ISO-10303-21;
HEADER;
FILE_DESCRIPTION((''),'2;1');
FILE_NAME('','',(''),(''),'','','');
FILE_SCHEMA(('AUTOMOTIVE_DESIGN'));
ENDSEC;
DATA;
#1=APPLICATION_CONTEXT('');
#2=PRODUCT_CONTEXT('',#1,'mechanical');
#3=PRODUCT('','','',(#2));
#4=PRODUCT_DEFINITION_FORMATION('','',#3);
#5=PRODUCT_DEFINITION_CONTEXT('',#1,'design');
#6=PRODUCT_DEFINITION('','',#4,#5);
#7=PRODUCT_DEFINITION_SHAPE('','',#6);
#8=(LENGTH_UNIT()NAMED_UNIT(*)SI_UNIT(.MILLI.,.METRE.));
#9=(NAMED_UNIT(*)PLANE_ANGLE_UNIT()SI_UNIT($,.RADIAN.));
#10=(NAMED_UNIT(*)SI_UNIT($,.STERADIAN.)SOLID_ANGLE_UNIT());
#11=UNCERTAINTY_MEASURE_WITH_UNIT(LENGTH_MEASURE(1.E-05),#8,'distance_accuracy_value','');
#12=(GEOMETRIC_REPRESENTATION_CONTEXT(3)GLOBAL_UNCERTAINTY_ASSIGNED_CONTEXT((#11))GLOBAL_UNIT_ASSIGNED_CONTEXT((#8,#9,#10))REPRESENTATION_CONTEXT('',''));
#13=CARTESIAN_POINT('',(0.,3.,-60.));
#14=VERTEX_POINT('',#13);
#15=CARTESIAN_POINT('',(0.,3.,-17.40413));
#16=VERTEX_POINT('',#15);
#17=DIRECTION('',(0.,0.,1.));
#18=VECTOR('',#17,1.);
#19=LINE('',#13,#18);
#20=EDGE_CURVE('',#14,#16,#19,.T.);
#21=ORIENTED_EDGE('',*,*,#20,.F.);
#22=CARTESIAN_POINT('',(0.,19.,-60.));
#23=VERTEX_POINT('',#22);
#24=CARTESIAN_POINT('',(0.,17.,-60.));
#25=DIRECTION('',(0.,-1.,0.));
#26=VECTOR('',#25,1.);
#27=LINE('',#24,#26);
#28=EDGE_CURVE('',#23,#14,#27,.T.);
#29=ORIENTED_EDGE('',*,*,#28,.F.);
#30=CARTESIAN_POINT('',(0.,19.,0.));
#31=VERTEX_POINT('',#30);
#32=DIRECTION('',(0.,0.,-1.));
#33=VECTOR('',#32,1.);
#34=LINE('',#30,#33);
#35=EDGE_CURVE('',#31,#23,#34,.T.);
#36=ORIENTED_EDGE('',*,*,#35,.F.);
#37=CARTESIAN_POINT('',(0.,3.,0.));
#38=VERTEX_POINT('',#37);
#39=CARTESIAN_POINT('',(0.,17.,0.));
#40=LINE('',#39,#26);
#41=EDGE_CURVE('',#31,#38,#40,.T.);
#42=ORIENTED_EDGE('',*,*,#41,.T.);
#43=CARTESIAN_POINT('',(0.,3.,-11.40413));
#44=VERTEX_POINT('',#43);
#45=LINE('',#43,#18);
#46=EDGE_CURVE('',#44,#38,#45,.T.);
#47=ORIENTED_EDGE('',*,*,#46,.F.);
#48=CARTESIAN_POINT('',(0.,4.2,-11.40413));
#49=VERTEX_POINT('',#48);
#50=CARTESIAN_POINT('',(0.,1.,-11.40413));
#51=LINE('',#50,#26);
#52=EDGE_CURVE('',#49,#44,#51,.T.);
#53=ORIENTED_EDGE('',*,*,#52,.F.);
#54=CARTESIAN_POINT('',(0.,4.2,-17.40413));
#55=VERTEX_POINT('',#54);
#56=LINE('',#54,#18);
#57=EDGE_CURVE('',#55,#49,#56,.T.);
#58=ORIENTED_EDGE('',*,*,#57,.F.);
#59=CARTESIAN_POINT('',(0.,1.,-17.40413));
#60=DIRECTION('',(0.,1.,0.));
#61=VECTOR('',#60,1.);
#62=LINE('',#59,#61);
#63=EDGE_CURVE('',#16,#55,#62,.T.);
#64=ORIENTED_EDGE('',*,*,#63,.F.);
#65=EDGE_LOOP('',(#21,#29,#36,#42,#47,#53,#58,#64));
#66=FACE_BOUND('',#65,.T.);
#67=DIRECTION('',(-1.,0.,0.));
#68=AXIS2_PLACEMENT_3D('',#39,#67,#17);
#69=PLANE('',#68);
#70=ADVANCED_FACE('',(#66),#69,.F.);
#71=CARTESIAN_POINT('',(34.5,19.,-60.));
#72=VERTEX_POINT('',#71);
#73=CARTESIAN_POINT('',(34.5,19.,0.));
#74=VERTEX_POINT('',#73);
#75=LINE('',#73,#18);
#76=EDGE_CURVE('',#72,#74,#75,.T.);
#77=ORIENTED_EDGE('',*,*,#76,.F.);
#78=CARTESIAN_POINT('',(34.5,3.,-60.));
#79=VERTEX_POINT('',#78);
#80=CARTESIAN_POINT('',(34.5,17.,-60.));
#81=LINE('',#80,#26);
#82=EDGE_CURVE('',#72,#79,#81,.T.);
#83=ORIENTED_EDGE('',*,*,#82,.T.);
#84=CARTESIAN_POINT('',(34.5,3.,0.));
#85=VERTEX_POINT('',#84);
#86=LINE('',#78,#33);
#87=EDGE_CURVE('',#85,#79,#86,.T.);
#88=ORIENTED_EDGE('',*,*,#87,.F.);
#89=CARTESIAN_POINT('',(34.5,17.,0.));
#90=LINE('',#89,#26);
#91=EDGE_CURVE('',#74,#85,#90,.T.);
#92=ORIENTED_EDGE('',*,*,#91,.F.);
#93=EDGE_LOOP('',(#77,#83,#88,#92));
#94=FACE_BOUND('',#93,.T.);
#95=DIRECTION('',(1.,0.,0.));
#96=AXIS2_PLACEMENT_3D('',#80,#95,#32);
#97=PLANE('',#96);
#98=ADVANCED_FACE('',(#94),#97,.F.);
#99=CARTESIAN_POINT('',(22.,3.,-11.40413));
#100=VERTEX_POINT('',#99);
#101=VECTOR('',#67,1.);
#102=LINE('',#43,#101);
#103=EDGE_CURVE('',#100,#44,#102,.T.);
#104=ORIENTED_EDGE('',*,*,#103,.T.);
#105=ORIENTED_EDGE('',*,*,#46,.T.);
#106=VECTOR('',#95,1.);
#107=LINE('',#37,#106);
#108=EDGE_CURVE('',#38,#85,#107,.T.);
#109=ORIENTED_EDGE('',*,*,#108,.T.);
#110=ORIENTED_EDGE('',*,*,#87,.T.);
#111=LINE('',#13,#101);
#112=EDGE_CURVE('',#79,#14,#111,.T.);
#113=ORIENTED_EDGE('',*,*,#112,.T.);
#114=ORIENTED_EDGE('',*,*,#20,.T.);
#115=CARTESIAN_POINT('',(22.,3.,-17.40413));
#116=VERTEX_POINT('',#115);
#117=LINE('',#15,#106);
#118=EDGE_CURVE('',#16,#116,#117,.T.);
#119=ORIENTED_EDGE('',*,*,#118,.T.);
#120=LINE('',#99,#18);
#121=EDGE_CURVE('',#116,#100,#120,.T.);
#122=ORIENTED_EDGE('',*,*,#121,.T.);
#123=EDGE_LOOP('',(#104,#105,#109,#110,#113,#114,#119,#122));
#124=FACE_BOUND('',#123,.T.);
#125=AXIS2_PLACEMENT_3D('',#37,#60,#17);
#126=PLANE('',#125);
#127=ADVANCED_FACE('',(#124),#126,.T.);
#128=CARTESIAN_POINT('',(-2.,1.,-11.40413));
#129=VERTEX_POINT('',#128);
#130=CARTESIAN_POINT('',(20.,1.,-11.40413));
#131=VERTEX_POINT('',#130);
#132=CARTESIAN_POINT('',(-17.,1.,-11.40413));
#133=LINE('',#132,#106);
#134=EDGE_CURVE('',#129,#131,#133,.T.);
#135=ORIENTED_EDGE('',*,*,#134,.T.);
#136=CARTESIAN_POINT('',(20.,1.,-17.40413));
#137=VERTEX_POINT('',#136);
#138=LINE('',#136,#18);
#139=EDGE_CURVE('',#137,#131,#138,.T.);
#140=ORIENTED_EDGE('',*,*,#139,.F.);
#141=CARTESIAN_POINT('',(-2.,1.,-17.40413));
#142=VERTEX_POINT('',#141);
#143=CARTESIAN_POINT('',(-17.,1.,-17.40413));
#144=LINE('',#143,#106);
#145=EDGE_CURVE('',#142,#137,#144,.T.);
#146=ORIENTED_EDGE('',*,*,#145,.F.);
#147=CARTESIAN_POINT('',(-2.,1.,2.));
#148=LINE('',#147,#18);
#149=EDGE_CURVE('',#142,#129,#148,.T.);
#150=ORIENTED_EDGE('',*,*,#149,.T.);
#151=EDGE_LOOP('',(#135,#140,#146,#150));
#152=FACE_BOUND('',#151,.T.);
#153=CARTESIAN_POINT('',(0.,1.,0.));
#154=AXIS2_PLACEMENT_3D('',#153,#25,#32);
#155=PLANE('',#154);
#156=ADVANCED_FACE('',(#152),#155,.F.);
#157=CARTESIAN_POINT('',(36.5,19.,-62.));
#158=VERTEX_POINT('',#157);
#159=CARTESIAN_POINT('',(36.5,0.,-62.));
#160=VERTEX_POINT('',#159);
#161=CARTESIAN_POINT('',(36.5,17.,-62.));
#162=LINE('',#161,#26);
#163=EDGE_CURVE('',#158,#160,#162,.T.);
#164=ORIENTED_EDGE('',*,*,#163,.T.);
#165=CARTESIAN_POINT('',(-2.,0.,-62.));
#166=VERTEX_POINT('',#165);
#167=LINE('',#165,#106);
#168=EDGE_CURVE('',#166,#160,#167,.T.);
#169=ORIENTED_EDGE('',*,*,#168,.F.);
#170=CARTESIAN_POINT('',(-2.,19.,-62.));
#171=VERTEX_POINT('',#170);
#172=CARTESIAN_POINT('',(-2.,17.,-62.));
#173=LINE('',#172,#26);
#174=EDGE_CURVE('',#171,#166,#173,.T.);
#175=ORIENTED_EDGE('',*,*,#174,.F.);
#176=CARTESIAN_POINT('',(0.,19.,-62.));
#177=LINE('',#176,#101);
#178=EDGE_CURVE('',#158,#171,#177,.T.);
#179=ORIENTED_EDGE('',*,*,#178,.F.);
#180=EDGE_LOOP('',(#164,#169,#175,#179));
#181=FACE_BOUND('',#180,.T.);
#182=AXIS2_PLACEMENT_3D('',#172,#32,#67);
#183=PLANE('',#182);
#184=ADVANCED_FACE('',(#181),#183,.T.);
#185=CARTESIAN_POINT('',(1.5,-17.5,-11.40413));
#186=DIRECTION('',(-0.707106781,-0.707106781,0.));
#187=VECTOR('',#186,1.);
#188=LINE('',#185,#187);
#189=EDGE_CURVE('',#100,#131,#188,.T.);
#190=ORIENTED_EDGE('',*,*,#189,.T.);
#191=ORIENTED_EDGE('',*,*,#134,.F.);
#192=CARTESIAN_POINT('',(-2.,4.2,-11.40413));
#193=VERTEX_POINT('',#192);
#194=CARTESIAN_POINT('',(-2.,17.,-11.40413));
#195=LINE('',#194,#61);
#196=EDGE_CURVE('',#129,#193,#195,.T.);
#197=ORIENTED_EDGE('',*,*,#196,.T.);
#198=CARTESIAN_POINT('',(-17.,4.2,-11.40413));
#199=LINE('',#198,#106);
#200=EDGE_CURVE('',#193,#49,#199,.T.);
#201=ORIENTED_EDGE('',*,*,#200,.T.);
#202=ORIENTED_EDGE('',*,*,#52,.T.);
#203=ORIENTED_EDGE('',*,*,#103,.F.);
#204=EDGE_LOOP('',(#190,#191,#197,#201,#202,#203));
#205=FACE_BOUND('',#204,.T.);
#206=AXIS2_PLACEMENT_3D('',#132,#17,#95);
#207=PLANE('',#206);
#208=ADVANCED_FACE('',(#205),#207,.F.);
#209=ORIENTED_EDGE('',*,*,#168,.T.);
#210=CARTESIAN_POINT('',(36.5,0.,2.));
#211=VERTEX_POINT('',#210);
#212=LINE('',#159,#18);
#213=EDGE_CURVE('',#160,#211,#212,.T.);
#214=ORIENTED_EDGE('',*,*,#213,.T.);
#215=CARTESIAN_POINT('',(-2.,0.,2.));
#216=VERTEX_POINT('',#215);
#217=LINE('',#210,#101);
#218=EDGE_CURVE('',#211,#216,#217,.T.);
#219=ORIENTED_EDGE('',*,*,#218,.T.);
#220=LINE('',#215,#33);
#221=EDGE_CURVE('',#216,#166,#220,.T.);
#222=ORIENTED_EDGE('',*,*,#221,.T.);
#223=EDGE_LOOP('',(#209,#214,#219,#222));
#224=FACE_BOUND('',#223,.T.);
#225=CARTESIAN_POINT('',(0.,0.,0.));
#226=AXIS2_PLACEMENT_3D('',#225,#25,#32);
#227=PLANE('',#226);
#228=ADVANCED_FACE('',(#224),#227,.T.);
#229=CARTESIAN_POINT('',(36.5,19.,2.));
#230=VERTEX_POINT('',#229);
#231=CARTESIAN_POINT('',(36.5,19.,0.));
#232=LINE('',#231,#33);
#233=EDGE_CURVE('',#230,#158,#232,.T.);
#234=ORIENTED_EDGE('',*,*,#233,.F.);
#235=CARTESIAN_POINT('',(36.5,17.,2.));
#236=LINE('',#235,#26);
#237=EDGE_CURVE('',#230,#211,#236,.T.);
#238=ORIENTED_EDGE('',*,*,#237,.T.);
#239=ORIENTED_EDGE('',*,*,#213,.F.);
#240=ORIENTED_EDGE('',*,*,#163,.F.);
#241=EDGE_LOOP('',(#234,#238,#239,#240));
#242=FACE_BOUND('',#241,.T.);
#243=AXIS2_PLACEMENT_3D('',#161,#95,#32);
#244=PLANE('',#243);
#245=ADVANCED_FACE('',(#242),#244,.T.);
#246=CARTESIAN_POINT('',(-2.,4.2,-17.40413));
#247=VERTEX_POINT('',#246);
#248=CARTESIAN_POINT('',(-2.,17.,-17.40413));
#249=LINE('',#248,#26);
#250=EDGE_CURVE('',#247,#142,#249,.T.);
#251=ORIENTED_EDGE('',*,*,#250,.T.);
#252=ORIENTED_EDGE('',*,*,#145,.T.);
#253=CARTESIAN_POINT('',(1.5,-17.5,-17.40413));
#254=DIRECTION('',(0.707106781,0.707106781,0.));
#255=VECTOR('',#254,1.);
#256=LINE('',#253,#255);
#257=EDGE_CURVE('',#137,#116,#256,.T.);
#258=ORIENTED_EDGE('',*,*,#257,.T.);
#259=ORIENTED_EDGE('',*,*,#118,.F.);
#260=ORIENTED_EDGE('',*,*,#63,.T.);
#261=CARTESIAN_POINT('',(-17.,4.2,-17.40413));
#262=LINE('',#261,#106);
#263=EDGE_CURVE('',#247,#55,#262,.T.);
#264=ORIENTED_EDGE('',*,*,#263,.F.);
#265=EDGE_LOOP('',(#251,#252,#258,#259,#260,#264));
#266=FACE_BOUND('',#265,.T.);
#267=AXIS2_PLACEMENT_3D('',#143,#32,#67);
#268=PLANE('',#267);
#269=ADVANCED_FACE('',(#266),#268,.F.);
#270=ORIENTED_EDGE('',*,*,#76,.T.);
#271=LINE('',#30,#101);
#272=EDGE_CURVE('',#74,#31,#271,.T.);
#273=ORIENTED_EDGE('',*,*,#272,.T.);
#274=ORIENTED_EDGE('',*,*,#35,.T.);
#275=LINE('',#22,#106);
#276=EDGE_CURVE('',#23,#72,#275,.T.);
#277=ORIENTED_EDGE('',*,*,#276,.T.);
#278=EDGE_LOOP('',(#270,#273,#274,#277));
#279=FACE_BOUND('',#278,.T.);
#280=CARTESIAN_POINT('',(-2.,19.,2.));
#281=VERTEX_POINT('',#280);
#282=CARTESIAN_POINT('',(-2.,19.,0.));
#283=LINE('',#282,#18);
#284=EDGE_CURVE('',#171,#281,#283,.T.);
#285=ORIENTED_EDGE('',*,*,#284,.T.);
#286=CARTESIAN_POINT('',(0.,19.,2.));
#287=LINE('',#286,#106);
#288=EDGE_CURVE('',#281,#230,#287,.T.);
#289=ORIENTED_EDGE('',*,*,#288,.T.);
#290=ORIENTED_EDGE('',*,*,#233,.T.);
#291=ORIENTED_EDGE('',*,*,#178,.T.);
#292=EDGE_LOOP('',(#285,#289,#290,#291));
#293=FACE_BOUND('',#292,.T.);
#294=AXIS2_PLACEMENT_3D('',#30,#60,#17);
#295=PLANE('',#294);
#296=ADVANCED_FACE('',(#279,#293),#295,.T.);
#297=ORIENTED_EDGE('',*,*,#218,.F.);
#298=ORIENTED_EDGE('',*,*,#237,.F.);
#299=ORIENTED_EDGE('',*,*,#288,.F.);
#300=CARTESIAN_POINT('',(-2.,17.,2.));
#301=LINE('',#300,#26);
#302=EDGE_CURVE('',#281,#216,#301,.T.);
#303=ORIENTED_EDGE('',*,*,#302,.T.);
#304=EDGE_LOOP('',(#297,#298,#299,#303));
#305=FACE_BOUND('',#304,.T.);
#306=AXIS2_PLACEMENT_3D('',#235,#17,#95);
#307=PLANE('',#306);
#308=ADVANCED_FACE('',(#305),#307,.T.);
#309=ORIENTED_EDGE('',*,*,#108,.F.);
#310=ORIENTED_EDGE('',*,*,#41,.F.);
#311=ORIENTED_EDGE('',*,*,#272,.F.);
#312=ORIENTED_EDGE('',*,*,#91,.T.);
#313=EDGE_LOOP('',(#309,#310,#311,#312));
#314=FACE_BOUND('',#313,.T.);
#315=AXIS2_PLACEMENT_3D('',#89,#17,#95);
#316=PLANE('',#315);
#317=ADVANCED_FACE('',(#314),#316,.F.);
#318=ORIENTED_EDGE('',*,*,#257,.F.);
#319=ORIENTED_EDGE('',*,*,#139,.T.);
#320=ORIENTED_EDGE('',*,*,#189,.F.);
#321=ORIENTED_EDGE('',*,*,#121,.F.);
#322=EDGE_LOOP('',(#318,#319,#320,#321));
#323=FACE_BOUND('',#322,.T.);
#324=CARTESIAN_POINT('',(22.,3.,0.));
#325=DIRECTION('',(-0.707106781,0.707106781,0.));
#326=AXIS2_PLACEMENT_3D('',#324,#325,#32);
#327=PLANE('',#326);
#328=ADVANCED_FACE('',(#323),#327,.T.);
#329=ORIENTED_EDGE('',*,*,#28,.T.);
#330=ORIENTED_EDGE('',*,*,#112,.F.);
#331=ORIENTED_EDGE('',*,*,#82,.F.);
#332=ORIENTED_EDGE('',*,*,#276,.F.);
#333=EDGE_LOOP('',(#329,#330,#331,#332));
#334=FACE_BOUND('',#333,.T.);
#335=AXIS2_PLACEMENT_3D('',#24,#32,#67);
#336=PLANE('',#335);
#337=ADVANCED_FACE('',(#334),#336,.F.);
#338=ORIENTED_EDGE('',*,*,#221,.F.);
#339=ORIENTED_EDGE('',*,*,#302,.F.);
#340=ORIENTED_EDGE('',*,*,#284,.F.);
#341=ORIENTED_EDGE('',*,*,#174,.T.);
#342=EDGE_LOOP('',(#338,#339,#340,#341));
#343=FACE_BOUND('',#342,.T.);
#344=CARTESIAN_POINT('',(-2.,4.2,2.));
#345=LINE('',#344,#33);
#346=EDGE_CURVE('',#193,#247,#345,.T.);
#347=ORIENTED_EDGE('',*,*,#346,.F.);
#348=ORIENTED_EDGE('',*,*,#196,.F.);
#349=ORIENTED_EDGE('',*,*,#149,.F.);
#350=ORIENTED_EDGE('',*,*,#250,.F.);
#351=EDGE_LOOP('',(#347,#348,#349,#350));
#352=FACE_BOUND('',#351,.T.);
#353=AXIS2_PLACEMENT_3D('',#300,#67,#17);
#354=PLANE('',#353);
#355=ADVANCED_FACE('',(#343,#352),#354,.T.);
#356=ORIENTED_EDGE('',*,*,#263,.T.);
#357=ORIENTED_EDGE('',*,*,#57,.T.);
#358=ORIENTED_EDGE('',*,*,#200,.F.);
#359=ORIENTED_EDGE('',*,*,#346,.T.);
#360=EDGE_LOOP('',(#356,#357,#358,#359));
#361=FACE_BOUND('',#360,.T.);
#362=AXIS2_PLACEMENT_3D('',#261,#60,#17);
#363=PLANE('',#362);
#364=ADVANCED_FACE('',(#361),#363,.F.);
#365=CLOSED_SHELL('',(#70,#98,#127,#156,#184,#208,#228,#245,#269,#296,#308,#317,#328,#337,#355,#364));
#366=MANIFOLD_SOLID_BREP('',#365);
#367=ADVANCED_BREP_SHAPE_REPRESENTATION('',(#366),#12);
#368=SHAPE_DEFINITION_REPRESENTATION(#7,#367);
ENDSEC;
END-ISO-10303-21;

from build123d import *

# Parameters (mm, degrees)
SKETCH1_W           = 34.5
SKETCH1_H           = 60
BOSS_EXTRUDE1_DEPTH = 1
SKETCH2_W           = 38.5
SKETCH2_H           = 64
SKETCH2_W_2         = 34.5
SKETCH2_H_2         = 60
BOSS_EXTRUDE2_DEPTH = 17
SKETCH3_W           = 6
SKETCH3_H           = 3.2
CUT_EXTRUDE1_DEPTH  = 17
BOSS_EXTRUDE3_DEPTH = 2
SKETCH5_W           = 38.5
SKETCH5_H           = 64
SKETCH5_W_2         = 34.5
SKETCH5_H_2         = 60
BOSS_EXTRUDE4_DEPTH = 2
CHAMFER1_SIZE       = 2


with BuildPart() as part:
    # Sketch1 → Boss-Extrude1 (new body)
    with BuildSketch(Plane(origin=(0, 0, 0), x_dir=(1, 0, 0), z_dir=(0, 1, 0))):
        with Locations((17.25, 30)):
            Rectangle(SKETCH1_W, SKETCH1_H)
    extrude(amount=BOSS_EXTRUDE1_DEPTH)

    # Sketch2 → Boss-Extrude2 (add)
    with BuildSketch(Plane.XZ):
        with Locations((17.25, -30)):
            Rectangle(SKETCH2_W, SKETCH2_H)
        with Locations((17.25, -30)):
            Rectangle(SKETCH2_W_2, SKETCH2_H_2, mode=Mode.SUBTRACT)
    extrude(amount=-BOSS_EXTRUDE2_DEPTH)

    # Sketch3 → Cut-Extrude1 (cut)
    with BuildSketch(Plane(origin=(0, 0, 0), x_dir=(0, 0, -1), z_dir=(1, 0, 0))):
        with Locations((14.404129658, 2.6)):
            Rectangle(SKETCH3_W, SKETCH3_H)
    extrude(amount=-CUT_EXTRUDE1_DEPTH, mode=Mode.SUBTRACT)

    # Sketch4 → Boss-Extrude3 (add)
    with BuildSketch(Plane(origin=(0, 1, 0), x_dir=(1, 0, 0), z_dir=(0, 1, 0))):
        Polygon((0, 60), (34.5, 60), (34.5, 0), (0, 0), (0, 11.404129658), (20, 11.404129658), (20, 17.404129658), (0, 17.404129658), align=None)
    extrude(amount=BOSS_EXTRUDE3_DEPTH)

    # Sketch5 → Boss-Extrude4 (add)
    with BuildSketch(Plane(origin=(0, 17, 0), x_dir=(1, 0, 0), z_dir=(0, 1, 0))):
        with Locations((17.25, 30)):
            Rectangle(SKETCH5_W, SKETCH5_H)
        with Locations((17.25, 30)):
            Rectangle(SKETCH5_W_2, SKETCH5_H_2, mode=Mode.SUBTRACT)
    extrude(amount=BOSS_EXTRUDE4_DEPTH)

    # Chamfer1
    chamfer1_edges = [part.edges().sort_by_distance(p)[0] for p in [
        (20, 3, -14.404129658),
    ]]
    chamfer(chamfer1_edges, length=CHAMFER1_SIZE - 0.0001)  # a hair under: the kernel refuses the full size


solid = part.part
